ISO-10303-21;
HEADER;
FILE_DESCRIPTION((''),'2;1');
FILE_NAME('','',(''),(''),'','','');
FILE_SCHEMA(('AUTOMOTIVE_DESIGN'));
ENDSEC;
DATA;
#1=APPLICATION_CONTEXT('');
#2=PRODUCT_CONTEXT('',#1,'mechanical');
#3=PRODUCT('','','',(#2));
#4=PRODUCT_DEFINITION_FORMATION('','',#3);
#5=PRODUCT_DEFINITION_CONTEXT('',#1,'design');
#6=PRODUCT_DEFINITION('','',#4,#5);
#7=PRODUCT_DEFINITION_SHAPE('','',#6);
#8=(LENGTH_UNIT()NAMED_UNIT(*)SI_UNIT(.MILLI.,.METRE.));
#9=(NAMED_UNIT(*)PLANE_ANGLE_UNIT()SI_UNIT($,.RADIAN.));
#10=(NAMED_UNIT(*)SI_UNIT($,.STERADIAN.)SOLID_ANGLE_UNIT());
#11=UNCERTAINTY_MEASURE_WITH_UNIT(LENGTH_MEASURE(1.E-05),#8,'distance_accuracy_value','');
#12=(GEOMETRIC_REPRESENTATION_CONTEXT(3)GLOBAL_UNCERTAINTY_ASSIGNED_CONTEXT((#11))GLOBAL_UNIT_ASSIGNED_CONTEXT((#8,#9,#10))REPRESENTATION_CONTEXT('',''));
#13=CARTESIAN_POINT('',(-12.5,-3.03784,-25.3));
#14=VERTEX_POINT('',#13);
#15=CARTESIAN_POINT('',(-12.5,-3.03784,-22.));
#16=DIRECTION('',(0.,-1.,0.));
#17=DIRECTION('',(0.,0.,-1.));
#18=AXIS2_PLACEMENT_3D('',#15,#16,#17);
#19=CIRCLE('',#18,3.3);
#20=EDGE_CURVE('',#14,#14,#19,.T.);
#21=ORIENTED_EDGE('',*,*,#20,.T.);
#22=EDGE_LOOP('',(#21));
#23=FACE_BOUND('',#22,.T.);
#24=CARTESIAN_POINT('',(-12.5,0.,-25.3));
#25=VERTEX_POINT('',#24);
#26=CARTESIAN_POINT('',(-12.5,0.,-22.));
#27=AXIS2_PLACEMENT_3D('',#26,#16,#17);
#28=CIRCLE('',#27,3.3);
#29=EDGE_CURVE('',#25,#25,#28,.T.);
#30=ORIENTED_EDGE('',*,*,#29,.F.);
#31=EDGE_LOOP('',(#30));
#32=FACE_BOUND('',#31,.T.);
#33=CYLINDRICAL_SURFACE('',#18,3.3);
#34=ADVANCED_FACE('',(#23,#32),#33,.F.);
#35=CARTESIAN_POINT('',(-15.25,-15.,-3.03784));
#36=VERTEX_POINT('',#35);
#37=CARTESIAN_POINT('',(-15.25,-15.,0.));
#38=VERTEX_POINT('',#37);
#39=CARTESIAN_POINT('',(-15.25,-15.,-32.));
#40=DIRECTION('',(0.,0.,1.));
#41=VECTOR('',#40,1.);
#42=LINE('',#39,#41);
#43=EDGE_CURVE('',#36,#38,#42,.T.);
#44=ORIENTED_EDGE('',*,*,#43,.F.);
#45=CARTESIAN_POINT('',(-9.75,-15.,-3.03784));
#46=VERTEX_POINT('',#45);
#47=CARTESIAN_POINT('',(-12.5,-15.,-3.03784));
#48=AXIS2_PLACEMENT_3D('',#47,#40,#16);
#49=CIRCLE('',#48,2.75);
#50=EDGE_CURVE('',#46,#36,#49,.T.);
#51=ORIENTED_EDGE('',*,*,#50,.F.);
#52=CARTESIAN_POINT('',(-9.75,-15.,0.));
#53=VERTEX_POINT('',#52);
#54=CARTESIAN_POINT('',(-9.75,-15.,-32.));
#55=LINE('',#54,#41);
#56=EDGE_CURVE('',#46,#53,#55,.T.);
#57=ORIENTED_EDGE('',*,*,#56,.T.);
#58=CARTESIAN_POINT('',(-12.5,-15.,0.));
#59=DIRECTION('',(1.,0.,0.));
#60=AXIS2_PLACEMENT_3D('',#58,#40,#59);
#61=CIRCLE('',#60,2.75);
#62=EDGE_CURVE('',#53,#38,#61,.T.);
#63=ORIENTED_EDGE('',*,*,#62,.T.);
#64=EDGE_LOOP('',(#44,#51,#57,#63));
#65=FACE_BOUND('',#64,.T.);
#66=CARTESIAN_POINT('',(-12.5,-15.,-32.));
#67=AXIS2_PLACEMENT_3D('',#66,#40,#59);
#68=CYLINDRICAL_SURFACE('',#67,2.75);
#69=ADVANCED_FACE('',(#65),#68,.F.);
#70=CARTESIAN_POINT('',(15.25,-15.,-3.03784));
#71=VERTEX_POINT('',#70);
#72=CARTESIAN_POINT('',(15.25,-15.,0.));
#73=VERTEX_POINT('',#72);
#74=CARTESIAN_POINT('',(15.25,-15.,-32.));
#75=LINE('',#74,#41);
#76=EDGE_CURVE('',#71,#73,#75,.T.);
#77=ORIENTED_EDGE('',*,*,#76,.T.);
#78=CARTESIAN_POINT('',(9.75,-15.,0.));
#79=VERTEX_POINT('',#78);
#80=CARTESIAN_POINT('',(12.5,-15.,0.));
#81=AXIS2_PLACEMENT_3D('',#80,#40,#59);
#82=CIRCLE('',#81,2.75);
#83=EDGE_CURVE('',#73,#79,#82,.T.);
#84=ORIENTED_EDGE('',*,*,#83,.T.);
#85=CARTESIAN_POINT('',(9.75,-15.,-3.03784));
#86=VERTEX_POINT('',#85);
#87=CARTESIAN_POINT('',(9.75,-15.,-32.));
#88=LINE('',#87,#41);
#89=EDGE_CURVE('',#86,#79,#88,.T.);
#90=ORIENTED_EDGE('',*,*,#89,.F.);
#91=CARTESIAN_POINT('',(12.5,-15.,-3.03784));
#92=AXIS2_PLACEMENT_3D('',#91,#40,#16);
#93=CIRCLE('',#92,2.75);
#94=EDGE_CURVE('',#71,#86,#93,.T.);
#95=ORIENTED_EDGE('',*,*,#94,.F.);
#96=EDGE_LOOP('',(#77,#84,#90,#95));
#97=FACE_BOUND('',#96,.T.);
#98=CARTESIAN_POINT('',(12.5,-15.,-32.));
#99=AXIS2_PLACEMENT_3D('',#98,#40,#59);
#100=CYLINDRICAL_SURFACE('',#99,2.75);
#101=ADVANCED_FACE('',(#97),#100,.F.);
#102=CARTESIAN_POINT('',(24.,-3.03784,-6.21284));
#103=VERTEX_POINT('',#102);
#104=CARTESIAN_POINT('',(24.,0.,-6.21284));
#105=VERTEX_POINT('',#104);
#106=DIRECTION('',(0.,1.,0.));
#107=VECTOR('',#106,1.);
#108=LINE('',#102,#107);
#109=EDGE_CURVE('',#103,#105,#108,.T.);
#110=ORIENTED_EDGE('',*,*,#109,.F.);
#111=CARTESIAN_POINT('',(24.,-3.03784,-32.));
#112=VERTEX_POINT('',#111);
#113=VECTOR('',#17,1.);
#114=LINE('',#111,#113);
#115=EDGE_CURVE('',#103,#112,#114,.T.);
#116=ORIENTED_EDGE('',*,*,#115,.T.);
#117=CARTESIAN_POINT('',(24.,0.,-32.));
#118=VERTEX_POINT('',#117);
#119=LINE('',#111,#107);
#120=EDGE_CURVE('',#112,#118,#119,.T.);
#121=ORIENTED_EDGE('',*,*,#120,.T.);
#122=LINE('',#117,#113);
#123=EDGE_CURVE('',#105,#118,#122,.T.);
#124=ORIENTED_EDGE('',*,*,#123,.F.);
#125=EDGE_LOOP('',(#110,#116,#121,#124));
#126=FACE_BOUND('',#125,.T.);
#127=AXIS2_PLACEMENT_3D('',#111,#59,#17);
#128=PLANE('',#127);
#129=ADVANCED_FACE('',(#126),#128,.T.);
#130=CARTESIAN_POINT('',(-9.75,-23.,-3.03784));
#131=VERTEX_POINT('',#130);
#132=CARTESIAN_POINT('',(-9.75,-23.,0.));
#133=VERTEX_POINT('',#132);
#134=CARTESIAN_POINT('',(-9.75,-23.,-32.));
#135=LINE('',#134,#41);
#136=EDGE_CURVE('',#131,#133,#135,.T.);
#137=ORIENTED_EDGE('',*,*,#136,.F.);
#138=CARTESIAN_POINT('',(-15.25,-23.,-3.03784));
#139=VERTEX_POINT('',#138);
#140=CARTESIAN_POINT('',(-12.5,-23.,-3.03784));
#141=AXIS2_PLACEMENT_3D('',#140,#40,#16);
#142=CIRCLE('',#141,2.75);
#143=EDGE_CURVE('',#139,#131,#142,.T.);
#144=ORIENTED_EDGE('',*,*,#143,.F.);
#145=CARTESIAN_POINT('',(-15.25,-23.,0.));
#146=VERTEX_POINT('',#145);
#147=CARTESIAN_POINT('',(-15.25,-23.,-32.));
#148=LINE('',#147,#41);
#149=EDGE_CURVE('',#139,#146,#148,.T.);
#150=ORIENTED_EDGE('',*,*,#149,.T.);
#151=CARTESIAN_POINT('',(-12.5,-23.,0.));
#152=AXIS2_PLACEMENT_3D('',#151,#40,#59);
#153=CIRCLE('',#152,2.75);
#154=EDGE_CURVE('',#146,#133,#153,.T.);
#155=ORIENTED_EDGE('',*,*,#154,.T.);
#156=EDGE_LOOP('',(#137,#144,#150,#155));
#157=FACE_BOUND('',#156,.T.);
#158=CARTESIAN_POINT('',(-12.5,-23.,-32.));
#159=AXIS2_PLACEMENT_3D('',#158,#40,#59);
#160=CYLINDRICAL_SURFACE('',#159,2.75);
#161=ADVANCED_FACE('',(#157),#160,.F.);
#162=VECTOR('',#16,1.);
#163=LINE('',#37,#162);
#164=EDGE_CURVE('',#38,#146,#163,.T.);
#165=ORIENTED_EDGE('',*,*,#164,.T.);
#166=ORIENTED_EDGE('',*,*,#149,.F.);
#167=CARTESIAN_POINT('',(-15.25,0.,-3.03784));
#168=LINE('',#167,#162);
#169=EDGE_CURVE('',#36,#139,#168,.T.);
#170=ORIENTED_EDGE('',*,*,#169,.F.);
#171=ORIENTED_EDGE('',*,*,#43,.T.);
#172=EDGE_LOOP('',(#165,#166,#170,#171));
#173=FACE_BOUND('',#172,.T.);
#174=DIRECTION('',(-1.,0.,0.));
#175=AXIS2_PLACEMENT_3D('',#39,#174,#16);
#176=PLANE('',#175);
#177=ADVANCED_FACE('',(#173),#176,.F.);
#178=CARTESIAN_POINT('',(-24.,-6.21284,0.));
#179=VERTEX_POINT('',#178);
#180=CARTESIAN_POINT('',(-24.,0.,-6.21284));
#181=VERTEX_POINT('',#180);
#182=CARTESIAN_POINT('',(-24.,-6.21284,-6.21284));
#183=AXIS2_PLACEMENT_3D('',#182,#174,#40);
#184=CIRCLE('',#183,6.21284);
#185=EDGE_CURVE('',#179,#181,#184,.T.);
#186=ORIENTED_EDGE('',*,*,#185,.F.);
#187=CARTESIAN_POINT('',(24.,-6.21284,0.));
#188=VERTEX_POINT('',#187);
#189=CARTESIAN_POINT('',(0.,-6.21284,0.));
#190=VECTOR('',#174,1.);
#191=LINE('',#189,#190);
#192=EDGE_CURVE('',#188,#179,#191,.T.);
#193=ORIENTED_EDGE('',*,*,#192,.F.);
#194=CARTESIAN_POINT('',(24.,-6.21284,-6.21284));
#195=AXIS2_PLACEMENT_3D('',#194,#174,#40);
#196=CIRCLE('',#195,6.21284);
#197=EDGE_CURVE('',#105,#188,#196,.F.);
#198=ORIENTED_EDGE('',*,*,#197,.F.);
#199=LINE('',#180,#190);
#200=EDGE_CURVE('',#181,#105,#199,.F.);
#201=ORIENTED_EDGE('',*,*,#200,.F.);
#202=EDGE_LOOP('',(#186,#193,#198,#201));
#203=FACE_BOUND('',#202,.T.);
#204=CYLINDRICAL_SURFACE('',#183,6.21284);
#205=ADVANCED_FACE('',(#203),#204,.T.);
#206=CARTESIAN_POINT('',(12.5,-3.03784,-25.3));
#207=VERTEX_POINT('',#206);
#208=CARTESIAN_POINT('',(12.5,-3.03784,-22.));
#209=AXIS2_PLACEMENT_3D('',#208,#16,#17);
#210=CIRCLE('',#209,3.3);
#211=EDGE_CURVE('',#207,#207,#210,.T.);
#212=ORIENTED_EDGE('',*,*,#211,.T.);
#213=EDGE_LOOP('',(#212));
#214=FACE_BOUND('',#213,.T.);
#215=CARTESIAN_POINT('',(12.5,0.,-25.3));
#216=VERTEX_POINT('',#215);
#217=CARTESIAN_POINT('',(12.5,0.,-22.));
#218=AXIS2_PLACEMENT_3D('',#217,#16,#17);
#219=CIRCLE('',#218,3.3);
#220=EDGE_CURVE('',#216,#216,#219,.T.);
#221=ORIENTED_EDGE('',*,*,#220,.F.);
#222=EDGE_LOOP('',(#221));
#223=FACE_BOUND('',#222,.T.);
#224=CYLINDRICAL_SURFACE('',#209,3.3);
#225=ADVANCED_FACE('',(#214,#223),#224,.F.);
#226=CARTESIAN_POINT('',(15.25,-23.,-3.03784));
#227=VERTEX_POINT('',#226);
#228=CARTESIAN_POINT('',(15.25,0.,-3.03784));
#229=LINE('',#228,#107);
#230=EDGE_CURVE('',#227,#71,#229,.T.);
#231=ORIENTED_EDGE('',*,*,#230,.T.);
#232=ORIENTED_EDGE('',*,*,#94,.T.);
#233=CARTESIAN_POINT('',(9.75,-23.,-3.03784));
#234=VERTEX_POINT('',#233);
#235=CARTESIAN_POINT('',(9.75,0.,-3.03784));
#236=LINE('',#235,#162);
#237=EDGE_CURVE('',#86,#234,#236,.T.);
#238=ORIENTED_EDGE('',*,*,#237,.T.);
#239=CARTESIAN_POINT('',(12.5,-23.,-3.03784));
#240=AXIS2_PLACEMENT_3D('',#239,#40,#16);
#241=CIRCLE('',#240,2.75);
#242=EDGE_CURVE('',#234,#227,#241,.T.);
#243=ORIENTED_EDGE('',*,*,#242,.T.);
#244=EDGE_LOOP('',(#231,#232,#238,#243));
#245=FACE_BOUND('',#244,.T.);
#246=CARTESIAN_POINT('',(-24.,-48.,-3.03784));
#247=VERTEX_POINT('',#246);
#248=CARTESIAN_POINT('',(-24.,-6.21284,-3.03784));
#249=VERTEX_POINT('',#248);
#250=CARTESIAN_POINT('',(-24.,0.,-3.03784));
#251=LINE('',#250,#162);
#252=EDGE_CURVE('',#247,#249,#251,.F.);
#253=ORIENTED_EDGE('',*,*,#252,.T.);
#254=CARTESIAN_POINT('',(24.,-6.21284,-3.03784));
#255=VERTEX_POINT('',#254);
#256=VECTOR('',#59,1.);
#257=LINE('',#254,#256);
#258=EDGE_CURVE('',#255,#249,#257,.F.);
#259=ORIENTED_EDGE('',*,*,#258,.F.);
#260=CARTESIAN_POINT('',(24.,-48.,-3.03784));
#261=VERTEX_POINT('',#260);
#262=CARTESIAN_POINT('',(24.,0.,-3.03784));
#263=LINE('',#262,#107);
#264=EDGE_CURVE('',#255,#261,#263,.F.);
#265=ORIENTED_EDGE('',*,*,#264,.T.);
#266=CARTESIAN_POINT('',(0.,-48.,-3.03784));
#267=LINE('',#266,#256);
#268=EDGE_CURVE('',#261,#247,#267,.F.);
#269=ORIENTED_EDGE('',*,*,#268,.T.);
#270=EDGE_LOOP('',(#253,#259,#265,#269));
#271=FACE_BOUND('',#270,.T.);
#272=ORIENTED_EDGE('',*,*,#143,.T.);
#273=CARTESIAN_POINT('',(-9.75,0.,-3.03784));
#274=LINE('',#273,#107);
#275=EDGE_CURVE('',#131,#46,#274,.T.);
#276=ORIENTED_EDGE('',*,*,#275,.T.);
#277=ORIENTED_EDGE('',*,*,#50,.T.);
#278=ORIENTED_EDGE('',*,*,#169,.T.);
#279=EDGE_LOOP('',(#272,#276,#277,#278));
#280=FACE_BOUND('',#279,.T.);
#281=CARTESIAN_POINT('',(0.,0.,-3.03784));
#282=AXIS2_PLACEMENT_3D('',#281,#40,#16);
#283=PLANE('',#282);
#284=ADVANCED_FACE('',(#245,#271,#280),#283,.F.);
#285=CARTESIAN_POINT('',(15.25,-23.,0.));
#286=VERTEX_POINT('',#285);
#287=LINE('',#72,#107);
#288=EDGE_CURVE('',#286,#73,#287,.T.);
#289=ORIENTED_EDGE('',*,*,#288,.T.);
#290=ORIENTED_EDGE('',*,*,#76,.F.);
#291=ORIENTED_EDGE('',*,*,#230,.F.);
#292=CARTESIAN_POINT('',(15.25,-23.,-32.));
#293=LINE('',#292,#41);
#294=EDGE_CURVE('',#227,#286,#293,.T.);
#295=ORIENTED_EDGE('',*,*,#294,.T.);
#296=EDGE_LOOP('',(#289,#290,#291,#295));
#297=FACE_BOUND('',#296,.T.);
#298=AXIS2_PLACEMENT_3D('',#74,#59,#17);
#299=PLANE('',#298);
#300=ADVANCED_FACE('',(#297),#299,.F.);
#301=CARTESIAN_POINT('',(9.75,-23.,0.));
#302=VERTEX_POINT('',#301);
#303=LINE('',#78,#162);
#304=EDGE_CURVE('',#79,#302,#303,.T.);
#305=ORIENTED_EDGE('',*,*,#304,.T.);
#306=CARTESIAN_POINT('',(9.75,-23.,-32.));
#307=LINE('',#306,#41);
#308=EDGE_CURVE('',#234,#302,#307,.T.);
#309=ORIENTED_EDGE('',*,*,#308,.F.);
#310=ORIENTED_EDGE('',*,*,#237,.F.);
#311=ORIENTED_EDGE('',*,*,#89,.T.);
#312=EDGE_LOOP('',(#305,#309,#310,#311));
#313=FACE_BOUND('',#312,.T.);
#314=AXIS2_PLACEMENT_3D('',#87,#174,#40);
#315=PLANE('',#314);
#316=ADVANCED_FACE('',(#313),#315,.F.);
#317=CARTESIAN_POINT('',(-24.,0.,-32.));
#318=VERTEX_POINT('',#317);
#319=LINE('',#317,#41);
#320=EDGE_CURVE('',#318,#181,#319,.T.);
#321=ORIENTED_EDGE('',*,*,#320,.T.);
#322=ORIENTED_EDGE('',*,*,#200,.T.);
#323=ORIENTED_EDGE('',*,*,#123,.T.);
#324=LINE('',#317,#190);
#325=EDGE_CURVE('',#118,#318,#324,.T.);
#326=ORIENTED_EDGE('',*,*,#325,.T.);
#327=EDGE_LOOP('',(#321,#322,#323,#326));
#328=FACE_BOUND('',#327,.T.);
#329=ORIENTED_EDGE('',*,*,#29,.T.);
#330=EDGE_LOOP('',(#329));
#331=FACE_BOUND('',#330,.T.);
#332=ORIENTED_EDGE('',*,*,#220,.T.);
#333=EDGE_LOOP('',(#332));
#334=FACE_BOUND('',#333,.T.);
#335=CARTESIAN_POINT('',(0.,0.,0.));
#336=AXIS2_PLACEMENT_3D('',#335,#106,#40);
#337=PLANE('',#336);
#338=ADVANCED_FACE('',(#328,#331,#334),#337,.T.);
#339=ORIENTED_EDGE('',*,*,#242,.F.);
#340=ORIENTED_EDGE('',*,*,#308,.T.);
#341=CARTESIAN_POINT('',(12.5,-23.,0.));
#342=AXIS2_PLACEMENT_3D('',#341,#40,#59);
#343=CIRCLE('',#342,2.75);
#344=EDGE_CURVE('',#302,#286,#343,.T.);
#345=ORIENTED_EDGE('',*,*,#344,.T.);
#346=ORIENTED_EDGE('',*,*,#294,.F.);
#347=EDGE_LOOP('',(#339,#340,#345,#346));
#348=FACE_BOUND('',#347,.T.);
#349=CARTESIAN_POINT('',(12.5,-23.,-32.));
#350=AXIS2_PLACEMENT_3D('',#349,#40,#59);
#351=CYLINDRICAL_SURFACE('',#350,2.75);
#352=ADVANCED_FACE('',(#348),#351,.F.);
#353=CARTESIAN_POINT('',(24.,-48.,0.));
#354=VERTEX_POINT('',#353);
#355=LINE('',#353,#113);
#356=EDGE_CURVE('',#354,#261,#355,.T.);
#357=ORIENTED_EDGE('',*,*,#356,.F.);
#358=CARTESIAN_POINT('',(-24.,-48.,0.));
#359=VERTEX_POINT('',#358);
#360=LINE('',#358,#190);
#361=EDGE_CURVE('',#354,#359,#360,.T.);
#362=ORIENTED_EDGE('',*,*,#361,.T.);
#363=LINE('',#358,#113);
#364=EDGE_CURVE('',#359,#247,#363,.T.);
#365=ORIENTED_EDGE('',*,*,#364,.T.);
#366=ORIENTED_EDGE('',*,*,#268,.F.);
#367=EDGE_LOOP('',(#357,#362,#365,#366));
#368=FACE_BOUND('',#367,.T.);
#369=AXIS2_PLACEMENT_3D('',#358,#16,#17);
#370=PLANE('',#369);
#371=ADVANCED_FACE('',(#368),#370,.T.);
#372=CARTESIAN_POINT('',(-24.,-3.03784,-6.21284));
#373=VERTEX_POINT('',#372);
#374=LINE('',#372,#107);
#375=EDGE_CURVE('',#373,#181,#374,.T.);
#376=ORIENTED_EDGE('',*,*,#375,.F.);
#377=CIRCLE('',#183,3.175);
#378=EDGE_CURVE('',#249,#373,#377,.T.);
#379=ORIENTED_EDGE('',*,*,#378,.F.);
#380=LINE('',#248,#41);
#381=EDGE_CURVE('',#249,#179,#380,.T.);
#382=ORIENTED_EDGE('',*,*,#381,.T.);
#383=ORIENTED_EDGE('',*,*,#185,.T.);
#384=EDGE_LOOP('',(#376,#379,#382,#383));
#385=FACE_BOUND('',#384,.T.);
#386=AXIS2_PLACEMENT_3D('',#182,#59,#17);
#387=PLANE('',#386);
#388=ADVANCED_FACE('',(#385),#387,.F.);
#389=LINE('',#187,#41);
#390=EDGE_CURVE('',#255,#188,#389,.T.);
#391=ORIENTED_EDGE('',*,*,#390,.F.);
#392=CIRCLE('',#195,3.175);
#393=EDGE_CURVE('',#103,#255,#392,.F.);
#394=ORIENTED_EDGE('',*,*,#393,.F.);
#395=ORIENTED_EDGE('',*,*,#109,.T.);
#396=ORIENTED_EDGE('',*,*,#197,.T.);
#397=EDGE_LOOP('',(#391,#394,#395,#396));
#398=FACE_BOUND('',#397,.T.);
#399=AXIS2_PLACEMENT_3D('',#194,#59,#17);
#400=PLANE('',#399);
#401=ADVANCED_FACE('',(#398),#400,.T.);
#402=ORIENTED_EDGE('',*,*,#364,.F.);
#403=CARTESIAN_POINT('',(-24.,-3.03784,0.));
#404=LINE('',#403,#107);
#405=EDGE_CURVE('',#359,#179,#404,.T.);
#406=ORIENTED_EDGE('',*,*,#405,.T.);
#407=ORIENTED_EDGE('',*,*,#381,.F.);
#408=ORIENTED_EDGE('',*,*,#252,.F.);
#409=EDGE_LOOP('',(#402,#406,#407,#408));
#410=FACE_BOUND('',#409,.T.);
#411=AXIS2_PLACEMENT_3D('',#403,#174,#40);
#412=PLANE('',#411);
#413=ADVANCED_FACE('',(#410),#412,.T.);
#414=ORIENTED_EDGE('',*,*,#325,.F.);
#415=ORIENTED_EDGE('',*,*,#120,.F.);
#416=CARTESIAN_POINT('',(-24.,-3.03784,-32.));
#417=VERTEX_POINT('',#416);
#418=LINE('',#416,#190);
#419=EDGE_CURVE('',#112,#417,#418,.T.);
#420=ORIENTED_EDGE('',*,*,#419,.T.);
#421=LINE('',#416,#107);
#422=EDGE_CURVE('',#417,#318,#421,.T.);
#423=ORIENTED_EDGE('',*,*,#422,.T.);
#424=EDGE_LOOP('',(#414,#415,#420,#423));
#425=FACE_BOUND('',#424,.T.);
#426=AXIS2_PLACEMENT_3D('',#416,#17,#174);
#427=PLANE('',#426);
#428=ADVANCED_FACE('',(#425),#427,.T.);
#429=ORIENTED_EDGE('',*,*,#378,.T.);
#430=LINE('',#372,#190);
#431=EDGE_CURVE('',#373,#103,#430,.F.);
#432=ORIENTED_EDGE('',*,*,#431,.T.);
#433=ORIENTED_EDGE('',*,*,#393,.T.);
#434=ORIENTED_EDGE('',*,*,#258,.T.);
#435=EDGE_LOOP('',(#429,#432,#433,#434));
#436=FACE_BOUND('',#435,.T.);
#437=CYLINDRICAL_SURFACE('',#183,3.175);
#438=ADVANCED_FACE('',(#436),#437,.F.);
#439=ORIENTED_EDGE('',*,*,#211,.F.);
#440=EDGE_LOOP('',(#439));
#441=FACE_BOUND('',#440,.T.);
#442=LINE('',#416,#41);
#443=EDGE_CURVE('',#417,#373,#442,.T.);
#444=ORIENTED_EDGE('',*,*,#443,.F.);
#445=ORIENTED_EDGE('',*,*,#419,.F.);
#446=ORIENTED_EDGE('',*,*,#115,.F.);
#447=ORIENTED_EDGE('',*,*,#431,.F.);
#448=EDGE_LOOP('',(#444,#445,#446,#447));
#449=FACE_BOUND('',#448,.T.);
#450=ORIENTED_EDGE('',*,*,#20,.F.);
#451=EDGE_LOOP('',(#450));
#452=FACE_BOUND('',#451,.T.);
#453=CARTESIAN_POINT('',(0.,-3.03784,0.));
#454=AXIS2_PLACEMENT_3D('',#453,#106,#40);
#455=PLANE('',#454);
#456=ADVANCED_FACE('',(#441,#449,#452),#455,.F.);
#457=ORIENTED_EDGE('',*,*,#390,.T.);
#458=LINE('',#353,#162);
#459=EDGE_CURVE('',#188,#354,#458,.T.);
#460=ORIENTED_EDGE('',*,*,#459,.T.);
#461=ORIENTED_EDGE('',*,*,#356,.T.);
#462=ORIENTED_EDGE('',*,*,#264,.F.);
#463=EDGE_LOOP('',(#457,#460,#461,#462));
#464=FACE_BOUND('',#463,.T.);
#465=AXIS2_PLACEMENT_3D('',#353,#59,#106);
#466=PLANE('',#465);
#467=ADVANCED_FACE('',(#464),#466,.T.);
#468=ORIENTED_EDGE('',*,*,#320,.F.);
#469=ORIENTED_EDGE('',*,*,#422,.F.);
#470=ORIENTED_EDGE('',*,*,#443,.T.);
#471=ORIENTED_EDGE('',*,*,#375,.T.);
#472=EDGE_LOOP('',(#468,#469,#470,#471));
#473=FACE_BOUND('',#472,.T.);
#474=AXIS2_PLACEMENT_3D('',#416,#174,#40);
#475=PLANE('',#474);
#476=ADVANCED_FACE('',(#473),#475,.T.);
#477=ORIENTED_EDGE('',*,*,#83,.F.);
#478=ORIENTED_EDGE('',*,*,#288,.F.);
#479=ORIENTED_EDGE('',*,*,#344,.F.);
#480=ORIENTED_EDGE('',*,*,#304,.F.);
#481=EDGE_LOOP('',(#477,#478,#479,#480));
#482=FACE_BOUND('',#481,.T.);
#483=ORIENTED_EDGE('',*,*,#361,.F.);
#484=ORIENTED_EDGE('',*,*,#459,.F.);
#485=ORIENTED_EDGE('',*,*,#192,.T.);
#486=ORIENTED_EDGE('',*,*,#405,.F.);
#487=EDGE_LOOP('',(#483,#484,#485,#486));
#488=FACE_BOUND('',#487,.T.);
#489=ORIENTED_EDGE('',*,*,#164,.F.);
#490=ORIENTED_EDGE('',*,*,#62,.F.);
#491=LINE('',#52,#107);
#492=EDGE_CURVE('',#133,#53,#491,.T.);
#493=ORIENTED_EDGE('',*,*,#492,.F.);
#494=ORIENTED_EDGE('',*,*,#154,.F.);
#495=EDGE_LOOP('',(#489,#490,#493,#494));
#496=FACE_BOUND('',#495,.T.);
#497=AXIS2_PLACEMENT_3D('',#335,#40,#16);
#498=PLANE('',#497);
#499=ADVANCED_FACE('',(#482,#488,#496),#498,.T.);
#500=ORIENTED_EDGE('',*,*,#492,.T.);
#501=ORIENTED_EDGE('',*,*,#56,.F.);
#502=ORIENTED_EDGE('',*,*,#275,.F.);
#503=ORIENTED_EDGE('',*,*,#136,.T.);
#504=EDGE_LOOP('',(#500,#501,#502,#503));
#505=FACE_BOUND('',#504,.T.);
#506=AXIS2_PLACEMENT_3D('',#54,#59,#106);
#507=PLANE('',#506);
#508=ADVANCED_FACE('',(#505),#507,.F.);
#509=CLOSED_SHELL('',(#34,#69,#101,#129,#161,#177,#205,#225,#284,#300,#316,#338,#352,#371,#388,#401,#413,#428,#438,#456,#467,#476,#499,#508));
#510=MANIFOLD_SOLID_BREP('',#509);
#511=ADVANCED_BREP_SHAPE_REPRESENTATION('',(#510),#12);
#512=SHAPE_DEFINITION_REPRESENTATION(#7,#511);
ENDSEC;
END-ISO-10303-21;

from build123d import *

# Parameters (mm, degrees)
SKETCH1_W                    = 48
SKETCH1_H                    = 32
BASE_FLANGE1_DEPTH           = 3.03784
EDGE_FLANGE1_STRIP_W         = 18.50136
EDGE_FLANGE1_STRIP_H         = 3.03784
EDGE_FLANGE1_STRIP_CUT_DEPTH = 48
EDGE_FLANGE1_DEPTH           = 48
M6_CLEARANCE_HOLE1_D         = 6.6
CUT_EXTRUDE1_DEPTH           = 63.481997407


# Sheet-metal steps are written as plain solids
with BuildPart() as part:
    # Sketch1 → Base-Flange1 (new body)
    with BuildSketch(Plane(origin=(0, 0, 0), x_dir=(1, 0, 0), z_dir=(0, 1, 0))):
        with Locations((0, 16)):
            Rectangle(SKETCH1_W, SKETCH1_H)
    extrude(amount=-BASE_FLANGE1_DEPTH)

    # Edge-Flange1 strip (across the edge) → Edge-Flange1 strip cut (cut)
    with BuildSketch(Plane(origin=(24, -3.03784, 0), x_dir=(0, 0, -1), z_dir=(-1, 0, 0))):
        with Locations((-3.03784, -1.51892)):
            Rectangle(EDGE_FLANGE1_STRIP_W, EDGE_FLANGE1_STRIP_H)
    extrude(amount=EDGE_FLANGE1_STRIP_CUT_DEPTH, mode=Mode.SUBTRACT)

    # Edge-Flange1 section (across the edge) → Edge-Flange1 (add)
    with BuildSketch(Plane(origin=(24, -3.03784, 0), x_dir=(0, 0, -1), z_dir=(-1, 0, 0))):
        with BuildLine():
            Line((0, 3.175), (0, 44.96216))
            Line((0, 44.96216), (3.03784, 44.96216))
            Line((3.03784, 44.96216), (3.03784, 3.175))
            ThreePointArc((3.03784, 3.175), (3.96777597, 0.92993597), (6.21284, 0))
            Line((6.21284, 0), (6.21284, -3.03784))
            ThreePointArc((6.21284, -3.03784), (1.819698706, -1.218141294), (0, 3.175))
        make_face()
    extrude(amount=EDGE_FLANGE1_DEPTH)

    # M6 Clearance Hole1 (through all)
    with Locations(Plane(origin=(0, -3.03784, 0), x_dir=(-1, 0, 0), z_dir=(0, -1, 0))):
        with Locations((12.5, 22), (-12.5, 22)):
            Hole(M6_CLEARANCE_HOLE1_D / 2)

    # Sketch13 → Cut-Extrude1 (cut, through all)
    with BuildSketch(Plane.XY):
        with BuildLine():
            Line((-9.75, -15), (-9.75, -23))
            ThreePointArc((-9.75, -23), (-12.5, -25.75), (-15.25, -23))
            Line((-15.25, -23), (-15.25, -15))
            ThreePointArc((-15.25, -15), (-12.5, -12.25), (-9.75, -15))
        make_face()
        with BuildLine():
            Line((15.25, -15), (15.25, -23))
            ThreePointArc((15.25, -23), (12.5, -25.75), (9.75, -23))
            Line((9.75, -23), (9.75, -15))
            ThreePointArc((9.75, -15), (12.5, -12.25), (15.25, -15))
        make_face()
    extrude(amount=-CUT_EXTRUDE1_DEPTH, mode=Mode.SUBTRACT)


solid = part.part
